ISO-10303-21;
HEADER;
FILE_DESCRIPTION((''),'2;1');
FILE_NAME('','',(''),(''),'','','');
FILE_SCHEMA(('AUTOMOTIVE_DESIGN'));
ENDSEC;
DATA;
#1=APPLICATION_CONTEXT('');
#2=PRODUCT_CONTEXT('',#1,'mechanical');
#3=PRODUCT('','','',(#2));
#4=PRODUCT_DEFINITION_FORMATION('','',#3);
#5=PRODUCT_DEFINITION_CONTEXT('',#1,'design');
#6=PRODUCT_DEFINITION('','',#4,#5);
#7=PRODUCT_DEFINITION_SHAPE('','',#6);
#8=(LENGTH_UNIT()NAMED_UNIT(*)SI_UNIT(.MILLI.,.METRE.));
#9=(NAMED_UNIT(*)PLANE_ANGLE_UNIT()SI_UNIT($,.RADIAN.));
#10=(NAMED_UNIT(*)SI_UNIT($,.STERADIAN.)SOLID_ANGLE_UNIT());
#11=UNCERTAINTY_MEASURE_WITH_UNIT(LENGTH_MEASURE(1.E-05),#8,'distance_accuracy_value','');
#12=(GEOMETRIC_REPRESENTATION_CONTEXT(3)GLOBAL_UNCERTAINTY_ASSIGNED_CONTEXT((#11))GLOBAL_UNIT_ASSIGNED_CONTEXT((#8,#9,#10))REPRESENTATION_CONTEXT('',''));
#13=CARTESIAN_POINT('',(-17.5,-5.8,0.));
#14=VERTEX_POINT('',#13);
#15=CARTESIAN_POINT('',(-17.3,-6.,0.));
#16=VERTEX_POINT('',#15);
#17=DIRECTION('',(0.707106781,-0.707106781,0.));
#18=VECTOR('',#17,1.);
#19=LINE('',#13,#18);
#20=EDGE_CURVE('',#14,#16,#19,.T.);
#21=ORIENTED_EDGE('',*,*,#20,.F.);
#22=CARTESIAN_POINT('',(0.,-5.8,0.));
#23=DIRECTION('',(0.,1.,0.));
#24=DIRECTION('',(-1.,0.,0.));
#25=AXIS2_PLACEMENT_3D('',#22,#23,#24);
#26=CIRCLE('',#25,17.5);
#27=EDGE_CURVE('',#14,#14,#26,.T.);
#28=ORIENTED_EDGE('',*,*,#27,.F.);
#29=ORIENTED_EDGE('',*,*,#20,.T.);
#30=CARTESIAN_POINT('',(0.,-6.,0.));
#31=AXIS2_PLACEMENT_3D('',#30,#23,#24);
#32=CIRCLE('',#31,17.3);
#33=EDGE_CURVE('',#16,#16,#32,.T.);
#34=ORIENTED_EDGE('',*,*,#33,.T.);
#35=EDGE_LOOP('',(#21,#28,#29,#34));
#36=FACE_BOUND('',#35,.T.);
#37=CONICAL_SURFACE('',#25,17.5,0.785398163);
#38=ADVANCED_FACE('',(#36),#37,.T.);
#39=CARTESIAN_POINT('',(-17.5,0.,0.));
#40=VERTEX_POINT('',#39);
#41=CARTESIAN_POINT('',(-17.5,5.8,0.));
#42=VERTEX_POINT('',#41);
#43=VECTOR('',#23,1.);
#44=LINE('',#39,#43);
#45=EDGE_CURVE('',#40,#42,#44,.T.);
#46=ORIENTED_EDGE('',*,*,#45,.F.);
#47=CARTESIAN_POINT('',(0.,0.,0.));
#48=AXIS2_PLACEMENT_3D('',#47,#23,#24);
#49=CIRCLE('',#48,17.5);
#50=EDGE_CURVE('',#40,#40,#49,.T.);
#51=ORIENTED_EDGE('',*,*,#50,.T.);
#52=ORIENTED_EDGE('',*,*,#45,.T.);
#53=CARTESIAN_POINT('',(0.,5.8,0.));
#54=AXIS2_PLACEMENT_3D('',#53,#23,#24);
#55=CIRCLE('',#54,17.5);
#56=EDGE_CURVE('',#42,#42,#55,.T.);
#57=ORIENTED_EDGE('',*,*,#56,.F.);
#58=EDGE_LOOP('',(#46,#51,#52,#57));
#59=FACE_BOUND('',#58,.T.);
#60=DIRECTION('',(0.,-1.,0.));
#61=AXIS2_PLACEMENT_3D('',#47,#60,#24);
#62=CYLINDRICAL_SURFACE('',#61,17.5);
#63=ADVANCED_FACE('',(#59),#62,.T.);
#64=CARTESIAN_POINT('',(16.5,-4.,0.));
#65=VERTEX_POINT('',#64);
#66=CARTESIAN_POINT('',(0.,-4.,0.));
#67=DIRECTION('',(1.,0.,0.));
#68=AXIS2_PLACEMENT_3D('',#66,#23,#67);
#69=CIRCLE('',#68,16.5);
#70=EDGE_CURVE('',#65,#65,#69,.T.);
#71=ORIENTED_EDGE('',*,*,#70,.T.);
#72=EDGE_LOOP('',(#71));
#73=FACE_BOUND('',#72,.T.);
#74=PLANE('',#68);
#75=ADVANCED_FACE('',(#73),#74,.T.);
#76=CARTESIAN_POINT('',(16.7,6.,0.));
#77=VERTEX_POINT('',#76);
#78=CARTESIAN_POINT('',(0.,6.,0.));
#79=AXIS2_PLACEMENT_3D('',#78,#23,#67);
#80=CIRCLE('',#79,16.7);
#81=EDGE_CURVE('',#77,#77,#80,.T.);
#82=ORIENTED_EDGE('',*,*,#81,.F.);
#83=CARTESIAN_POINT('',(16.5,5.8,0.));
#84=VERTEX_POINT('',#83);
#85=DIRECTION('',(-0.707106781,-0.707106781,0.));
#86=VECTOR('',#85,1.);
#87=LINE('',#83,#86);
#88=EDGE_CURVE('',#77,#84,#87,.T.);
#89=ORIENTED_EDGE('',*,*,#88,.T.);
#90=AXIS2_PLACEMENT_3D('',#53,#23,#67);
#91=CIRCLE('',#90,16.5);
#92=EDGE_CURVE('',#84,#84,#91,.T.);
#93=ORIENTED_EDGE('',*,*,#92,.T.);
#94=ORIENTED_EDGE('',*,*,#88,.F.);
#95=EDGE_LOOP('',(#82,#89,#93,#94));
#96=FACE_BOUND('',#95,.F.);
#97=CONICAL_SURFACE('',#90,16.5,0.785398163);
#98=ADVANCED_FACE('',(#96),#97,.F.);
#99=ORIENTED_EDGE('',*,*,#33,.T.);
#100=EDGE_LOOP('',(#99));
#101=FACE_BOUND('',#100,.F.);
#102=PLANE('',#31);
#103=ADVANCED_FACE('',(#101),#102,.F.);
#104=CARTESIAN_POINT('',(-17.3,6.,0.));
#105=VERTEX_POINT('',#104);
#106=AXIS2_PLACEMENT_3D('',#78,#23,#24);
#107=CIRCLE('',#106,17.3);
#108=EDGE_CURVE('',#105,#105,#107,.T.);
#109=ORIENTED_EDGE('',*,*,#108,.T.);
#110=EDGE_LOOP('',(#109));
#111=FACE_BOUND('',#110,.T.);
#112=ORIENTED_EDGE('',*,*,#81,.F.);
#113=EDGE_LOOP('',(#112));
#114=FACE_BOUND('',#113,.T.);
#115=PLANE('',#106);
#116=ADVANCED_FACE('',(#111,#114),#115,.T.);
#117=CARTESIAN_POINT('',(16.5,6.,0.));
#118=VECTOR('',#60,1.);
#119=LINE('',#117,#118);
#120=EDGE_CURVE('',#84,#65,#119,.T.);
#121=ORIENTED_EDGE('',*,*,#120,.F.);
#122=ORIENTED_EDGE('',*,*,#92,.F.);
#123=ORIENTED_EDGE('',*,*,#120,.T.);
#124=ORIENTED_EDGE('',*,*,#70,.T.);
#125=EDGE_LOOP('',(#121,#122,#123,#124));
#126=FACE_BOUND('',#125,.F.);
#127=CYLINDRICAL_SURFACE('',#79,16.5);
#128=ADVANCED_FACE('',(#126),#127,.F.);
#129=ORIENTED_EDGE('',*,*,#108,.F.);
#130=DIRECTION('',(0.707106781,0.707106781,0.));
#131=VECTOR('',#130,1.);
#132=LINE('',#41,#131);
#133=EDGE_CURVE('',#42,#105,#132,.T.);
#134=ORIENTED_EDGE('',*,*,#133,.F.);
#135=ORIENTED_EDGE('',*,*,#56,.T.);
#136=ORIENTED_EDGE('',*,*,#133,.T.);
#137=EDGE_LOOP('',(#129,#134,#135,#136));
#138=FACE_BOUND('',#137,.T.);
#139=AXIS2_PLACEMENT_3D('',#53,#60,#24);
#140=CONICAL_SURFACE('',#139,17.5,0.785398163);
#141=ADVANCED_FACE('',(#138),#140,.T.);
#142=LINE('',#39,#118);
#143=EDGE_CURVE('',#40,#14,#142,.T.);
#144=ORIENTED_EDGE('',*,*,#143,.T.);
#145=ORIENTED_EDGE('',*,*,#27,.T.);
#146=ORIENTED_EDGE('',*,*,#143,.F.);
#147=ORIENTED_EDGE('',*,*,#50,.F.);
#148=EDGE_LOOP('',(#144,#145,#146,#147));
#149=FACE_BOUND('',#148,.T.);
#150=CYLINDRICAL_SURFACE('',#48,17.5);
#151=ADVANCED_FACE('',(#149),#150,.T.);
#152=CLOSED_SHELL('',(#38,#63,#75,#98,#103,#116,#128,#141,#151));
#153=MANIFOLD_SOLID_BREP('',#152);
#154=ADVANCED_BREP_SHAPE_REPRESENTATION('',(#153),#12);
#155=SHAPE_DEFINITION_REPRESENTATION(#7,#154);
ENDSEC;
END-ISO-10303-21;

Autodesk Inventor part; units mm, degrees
ref_plane "YZ Plane" through (0, 0, 0) normal (1, 0, 0) x (0, 1, 0)
ref_plane "XZ Plane" through (0, 0, 0) normal (0, 1, 0) x (-1, 0, 0)
ref_plane "XY Plane" through (0, 0, 0) normal (0, 0, 1) x (1, 0, 0)
sketch "Sketch4" plane through (0, 0, 0) normal (0, 1, 0) x (-1, 0, 0)
  circle A0 centre (0, 0) radius 17.5
extrude "Extrusion2" add sketch "Sketch4" along normal mid plane 12
sketch "Sketch12" plane through (0, 6, 0) normal (0, 1, 0) x (1, 0, 0)
  circle A0 centre (0, 0) radius 16.5
  dimension "d85" = 33
extrude "Extrusion8" cut sketch "Sketch12" against normal blind 10
sketch "Sketch13" plane through (0, -4, 0) normal (0, 1, 0) x (1, 0, 0)
  point P0 (0, 0)
chamfer "Chamfer1" distance 0.2 angle 45 3 edges at (17.5, 6, 0) (-16.5, 6, 0) (17.5, -6, 0)
properties part number "Shallow Dish" material "Brass, Soft Yellow"
